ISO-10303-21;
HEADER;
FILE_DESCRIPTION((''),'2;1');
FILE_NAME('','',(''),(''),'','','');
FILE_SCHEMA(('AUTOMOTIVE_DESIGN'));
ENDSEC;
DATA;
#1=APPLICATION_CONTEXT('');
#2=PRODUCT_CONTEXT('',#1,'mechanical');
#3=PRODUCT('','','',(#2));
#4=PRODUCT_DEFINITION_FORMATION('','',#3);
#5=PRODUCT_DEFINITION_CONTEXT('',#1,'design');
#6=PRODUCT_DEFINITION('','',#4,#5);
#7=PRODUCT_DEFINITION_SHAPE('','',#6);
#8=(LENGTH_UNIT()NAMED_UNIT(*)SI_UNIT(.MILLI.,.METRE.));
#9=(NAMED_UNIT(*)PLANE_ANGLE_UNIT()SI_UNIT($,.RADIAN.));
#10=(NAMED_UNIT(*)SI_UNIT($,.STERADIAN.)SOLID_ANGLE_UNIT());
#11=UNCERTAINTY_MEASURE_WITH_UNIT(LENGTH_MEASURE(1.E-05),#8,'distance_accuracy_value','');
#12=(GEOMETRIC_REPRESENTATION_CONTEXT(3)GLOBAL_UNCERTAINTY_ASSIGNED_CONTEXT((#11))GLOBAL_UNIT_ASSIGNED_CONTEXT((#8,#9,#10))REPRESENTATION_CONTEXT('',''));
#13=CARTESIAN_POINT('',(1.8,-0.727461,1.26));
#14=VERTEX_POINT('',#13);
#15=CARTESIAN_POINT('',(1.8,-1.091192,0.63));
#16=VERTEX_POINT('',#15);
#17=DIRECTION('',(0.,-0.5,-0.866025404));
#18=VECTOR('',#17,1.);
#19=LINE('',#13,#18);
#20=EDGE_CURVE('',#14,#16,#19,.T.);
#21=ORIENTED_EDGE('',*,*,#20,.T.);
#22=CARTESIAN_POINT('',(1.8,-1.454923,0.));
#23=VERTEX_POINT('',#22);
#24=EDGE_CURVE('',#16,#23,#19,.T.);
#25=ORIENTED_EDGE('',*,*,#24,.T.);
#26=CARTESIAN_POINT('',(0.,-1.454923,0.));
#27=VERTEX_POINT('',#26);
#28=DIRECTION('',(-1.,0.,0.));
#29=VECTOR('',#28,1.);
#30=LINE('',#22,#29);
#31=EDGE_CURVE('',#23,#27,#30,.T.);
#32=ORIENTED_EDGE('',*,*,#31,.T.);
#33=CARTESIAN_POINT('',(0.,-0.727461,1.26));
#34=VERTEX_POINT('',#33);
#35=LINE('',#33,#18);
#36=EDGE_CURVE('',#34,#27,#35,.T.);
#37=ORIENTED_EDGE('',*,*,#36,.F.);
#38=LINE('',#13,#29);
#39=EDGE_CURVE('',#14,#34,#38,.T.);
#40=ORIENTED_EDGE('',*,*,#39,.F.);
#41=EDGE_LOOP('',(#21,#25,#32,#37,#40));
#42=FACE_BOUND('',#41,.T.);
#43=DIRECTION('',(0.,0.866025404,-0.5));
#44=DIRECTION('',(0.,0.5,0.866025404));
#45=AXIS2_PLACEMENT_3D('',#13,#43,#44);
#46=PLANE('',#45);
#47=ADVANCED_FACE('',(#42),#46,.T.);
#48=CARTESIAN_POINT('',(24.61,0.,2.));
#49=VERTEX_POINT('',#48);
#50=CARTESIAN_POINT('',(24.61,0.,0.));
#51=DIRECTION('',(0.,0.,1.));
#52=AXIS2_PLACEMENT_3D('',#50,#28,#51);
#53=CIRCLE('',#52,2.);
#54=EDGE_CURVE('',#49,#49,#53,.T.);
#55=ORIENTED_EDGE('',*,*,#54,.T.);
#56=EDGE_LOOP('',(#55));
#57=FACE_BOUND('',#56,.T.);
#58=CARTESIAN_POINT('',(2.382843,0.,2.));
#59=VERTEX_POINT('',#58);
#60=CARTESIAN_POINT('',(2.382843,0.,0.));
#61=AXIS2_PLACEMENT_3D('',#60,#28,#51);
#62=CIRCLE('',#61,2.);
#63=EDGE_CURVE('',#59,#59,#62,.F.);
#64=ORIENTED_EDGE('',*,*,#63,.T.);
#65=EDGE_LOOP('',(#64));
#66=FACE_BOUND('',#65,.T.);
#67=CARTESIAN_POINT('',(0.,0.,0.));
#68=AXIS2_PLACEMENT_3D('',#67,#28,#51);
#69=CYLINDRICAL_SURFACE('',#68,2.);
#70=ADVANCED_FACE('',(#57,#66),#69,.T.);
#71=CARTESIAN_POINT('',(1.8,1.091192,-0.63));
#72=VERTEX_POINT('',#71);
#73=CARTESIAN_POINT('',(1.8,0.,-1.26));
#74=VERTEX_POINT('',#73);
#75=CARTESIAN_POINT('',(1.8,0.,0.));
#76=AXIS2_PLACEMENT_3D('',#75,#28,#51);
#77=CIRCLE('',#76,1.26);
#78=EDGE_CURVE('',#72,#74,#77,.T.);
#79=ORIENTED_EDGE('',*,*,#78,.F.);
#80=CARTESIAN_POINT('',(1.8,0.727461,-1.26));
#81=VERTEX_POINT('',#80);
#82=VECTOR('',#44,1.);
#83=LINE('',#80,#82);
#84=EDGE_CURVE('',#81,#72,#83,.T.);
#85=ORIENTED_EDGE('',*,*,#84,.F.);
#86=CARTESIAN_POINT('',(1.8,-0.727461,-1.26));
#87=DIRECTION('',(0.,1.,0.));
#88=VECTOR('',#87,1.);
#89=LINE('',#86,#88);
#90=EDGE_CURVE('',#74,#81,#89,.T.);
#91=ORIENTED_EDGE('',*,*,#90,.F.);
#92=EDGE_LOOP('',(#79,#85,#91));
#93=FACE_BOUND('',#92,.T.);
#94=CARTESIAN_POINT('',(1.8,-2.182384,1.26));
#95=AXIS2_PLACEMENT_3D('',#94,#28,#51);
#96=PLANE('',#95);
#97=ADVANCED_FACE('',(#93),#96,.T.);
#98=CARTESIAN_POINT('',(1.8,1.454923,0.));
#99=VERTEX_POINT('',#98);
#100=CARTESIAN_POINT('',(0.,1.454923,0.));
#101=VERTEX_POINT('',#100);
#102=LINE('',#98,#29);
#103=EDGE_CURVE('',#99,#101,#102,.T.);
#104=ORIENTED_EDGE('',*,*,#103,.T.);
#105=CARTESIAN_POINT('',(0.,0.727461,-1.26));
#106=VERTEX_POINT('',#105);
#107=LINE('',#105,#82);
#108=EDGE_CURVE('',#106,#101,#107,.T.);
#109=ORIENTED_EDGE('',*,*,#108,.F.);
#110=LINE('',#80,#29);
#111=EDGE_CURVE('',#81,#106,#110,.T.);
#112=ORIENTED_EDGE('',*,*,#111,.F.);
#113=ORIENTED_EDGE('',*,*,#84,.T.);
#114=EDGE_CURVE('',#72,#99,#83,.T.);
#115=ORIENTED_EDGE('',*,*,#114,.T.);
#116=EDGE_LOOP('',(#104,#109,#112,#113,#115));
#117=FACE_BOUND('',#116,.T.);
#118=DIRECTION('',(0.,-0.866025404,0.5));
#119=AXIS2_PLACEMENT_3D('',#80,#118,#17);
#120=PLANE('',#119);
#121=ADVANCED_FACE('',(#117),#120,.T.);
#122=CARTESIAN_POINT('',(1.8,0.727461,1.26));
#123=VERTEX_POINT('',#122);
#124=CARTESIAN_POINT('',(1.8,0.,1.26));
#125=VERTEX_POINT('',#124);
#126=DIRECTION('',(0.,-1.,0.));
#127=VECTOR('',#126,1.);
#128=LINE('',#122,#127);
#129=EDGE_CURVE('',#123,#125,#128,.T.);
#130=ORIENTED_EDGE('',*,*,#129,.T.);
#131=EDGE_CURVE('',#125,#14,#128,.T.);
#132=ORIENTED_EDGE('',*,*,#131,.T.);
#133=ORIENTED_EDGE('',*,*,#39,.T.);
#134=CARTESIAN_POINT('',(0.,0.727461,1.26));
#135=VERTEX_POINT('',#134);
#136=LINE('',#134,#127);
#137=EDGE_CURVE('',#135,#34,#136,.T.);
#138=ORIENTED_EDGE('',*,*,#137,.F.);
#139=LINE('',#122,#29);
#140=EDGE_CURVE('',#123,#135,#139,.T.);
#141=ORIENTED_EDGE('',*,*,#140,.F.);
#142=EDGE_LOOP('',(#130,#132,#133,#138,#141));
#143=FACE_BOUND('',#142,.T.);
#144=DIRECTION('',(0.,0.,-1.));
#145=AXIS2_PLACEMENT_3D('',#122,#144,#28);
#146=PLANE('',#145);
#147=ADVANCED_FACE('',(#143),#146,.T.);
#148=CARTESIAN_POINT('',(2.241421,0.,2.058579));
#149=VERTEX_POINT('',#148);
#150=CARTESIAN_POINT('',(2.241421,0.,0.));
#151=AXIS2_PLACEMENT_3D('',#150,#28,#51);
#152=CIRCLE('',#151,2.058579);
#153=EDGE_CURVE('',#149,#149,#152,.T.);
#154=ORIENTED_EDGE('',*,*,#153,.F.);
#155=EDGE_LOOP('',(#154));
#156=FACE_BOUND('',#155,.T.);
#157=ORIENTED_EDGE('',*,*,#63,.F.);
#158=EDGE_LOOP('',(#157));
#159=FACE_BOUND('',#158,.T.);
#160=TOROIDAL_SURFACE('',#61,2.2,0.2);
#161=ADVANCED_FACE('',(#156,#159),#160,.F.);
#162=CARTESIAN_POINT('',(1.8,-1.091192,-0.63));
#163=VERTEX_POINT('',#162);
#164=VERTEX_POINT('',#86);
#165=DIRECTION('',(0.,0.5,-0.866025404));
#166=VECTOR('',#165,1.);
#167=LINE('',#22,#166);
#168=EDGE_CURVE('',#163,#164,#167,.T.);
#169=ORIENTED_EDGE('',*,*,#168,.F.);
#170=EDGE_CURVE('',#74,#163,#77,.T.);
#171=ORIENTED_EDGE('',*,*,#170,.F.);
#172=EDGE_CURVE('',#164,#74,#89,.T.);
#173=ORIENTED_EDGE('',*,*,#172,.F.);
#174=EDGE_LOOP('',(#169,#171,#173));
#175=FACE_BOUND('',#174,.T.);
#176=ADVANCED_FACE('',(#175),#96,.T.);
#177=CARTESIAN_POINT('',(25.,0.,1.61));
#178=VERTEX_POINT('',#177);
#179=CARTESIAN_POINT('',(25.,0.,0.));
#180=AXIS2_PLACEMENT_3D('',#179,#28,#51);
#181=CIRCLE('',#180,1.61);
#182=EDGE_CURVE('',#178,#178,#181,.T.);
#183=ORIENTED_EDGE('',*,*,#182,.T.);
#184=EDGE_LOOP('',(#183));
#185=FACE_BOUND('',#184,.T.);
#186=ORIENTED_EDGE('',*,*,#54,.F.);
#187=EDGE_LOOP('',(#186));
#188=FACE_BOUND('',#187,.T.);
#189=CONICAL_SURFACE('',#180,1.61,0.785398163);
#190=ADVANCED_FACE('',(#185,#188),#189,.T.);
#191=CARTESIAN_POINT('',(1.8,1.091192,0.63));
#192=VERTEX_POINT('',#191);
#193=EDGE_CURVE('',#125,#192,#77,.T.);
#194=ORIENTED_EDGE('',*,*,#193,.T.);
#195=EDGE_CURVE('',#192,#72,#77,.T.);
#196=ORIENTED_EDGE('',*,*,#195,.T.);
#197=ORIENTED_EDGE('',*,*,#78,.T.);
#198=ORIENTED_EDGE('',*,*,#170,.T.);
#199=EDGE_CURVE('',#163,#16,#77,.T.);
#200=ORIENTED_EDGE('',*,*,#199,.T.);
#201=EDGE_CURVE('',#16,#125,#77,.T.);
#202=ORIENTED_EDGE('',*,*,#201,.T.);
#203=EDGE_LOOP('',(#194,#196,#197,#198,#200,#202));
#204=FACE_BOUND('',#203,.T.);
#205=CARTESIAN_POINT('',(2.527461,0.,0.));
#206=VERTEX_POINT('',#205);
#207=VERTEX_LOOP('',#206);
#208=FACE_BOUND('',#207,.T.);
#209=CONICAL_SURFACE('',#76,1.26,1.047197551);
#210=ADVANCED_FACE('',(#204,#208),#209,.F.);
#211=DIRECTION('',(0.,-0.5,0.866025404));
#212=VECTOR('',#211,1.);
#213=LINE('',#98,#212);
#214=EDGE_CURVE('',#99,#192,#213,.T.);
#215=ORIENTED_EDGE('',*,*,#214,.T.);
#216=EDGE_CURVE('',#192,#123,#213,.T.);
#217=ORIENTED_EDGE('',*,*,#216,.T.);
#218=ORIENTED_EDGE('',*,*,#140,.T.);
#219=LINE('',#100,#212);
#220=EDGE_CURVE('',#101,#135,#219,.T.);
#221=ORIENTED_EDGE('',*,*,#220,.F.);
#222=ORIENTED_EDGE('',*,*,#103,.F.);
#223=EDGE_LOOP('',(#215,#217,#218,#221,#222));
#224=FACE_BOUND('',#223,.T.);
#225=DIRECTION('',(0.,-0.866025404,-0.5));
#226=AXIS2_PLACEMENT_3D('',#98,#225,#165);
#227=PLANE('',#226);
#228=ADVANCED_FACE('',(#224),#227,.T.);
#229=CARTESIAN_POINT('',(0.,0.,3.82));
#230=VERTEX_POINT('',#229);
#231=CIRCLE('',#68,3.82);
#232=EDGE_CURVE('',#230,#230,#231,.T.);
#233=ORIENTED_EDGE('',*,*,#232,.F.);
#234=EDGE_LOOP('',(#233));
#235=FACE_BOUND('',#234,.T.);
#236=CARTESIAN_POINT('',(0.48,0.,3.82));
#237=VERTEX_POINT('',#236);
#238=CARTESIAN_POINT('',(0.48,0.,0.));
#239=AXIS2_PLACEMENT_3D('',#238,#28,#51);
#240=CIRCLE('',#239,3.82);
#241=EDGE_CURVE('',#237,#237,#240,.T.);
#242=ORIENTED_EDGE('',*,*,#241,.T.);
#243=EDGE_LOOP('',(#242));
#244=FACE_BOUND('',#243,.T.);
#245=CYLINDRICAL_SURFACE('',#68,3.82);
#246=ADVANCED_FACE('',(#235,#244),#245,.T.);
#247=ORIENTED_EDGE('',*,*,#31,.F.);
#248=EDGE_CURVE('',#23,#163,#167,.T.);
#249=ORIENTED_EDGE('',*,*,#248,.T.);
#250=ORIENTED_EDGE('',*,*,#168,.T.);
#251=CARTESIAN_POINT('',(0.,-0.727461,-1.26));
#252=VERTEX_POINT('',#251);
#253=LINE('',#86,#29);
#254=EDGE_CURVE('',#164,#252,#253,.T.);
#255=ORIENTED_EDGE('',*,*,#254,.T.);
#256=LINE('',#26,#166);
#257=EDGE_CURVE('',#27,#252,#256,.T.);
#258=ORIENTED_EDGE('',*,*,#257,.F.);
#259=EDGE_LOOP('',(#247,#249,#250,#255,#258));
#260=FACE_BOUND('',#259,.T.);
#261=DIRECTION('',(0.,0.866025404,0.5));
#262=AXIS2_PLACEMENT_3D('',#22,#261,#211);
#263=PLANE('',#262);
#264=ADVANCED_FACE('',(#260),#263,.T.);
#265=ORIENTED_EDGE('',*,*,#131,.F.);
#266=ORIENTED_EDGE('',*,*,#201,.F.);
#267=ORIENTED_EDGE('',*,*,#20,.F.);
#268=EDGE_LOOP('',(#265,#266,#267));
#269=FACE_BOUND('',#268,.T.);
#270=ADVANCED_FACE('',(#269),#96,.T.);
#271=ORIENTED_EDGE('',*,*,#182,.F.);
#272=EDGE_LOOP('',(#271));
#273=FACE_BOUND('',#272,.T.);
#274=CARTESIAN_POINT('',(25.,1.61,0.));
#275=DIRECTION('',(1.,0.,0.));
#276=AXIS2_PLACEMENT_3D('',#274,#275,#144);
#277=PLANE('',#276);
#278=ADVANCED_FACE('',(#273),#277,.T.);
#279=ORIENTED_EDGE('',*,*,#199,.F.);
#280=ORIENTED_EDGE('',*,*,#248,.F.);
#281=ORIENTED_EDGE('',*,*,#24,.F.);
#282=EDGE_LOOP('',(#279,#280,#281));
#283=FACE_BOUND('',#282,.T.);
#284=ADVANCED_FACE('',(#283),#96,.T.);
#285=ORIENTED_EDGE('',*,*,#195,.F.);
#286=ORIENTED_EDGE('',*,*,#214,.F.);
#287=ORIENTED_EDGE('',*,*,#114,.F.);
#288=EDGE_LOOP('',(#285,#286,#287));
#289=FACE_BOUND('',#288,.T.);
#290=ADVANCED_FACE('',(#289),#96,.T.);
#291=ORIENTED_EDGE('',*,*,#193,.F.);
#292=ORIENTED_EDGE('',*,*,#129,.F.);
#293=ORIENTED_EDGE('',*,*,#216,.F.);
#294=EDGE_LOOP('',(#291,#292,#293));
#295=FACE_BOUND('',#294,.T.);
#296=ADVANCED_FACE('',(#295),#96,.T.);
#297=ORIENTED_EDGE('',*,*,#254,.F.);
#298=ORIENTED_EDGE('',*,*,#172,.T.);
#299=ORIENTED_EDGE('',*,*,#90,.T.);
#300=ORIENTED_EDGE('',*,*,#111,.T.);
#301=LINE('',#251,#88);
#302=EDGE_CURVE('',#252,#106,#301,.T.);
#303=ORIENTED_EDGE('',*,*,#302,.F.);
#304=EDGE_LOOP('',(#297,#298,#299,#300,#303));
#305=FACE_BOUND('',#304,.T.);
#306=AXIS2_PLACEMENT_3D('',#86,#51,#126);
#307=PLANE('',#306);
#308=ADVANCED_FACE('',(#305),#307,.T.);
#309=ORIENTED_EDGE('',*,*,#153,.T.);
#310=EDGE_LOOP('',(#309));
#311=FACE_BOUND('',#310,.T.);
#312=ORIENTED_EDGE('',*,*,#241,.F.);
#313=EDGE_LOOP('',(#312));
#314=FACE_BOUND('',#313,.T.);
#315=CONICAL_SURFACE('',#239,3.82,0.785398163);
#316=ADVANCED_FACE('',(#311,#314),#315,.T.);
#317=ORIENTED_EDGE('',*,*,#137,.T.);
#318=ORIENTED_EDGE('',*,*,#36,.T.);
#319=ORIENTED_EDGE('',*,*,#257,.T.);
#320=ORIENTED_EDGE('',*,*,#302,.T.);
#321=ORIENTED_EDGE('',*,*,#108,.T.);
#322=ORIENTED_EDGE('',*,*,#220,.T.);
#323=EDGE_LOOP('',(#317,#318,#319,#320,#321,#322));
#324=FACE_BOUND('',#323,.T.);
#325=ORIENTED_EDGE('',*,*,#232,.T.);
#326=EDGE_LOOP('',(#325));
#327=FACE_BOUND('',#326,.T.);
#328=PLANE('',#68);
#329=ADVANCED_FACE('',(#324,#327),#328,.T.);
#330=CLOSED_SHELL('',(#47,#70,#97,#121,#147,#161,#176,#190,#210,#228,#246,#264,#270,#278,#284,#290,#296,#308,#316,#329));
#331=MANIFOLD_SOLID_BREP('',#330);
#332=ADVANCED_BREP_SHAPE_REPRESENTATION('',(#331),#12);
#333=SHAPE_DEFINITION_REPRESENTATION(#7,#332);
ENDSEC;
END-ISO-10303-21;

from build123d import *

# Parameters (mm, degrees)
FILLET1_R   = 0.2
HEX_START   = -1.8
HEX_2_DEPTH = 1.8


with BuildPart() as part:
    # BodySke → BaseBody (revolve)
    with BuildSketch(Plane.XY, mode=Mode.PRIVATE) as basebody_sk:
        Polygon((0, 0), (0, 3.82), (0.48, 3.82), (2.3, 2), (24.61, 2), (25, 1.61), (25, 0), align=None)
    revolve(basebody_sk.sketch.rotate(Axis((0, 0, 0), (1, 0, 0)), 90), axis=Axis((0, 0, 0), (1, 0, 0)))

    # Fillet1
    fillet1_edges = [part.edges().sort_by_distance(p)[0] for p in [
        (2.3, 0, -2),
    ]]
    fillet(fillet1_edges, radius=FILLET1_R)

    # Hex 2: read off the stored shape, not the designer's step
    # Hex 2 outline → Hex 2 (cut)
    with BuildSketch(Plane.ZY.offset(HEX_START)):
        Polygon((-1.26, -0.727461339), (0, -1.454922678), (1.26, -0.727461339), (1.26, 0.727461339), (0, 1.454922678), (-1.26, 0.727461339), align=None)
    extrude(amount=HEX_2_DEPTH, mode=Mode.SUBTRACT)

    # Hex 2 2 outline → Hex 2 2 (revolve, cut)
    with BuildSketch(Plane.YX):
        Polygon((1.26, 1.8), (0, 2.527461339), (0, 1.8), align=None)
    revolve(axis=Axis((0, 0, 0), (1, 0, 0)), mode=Mode.SUBTRACT)


solid = part.part
